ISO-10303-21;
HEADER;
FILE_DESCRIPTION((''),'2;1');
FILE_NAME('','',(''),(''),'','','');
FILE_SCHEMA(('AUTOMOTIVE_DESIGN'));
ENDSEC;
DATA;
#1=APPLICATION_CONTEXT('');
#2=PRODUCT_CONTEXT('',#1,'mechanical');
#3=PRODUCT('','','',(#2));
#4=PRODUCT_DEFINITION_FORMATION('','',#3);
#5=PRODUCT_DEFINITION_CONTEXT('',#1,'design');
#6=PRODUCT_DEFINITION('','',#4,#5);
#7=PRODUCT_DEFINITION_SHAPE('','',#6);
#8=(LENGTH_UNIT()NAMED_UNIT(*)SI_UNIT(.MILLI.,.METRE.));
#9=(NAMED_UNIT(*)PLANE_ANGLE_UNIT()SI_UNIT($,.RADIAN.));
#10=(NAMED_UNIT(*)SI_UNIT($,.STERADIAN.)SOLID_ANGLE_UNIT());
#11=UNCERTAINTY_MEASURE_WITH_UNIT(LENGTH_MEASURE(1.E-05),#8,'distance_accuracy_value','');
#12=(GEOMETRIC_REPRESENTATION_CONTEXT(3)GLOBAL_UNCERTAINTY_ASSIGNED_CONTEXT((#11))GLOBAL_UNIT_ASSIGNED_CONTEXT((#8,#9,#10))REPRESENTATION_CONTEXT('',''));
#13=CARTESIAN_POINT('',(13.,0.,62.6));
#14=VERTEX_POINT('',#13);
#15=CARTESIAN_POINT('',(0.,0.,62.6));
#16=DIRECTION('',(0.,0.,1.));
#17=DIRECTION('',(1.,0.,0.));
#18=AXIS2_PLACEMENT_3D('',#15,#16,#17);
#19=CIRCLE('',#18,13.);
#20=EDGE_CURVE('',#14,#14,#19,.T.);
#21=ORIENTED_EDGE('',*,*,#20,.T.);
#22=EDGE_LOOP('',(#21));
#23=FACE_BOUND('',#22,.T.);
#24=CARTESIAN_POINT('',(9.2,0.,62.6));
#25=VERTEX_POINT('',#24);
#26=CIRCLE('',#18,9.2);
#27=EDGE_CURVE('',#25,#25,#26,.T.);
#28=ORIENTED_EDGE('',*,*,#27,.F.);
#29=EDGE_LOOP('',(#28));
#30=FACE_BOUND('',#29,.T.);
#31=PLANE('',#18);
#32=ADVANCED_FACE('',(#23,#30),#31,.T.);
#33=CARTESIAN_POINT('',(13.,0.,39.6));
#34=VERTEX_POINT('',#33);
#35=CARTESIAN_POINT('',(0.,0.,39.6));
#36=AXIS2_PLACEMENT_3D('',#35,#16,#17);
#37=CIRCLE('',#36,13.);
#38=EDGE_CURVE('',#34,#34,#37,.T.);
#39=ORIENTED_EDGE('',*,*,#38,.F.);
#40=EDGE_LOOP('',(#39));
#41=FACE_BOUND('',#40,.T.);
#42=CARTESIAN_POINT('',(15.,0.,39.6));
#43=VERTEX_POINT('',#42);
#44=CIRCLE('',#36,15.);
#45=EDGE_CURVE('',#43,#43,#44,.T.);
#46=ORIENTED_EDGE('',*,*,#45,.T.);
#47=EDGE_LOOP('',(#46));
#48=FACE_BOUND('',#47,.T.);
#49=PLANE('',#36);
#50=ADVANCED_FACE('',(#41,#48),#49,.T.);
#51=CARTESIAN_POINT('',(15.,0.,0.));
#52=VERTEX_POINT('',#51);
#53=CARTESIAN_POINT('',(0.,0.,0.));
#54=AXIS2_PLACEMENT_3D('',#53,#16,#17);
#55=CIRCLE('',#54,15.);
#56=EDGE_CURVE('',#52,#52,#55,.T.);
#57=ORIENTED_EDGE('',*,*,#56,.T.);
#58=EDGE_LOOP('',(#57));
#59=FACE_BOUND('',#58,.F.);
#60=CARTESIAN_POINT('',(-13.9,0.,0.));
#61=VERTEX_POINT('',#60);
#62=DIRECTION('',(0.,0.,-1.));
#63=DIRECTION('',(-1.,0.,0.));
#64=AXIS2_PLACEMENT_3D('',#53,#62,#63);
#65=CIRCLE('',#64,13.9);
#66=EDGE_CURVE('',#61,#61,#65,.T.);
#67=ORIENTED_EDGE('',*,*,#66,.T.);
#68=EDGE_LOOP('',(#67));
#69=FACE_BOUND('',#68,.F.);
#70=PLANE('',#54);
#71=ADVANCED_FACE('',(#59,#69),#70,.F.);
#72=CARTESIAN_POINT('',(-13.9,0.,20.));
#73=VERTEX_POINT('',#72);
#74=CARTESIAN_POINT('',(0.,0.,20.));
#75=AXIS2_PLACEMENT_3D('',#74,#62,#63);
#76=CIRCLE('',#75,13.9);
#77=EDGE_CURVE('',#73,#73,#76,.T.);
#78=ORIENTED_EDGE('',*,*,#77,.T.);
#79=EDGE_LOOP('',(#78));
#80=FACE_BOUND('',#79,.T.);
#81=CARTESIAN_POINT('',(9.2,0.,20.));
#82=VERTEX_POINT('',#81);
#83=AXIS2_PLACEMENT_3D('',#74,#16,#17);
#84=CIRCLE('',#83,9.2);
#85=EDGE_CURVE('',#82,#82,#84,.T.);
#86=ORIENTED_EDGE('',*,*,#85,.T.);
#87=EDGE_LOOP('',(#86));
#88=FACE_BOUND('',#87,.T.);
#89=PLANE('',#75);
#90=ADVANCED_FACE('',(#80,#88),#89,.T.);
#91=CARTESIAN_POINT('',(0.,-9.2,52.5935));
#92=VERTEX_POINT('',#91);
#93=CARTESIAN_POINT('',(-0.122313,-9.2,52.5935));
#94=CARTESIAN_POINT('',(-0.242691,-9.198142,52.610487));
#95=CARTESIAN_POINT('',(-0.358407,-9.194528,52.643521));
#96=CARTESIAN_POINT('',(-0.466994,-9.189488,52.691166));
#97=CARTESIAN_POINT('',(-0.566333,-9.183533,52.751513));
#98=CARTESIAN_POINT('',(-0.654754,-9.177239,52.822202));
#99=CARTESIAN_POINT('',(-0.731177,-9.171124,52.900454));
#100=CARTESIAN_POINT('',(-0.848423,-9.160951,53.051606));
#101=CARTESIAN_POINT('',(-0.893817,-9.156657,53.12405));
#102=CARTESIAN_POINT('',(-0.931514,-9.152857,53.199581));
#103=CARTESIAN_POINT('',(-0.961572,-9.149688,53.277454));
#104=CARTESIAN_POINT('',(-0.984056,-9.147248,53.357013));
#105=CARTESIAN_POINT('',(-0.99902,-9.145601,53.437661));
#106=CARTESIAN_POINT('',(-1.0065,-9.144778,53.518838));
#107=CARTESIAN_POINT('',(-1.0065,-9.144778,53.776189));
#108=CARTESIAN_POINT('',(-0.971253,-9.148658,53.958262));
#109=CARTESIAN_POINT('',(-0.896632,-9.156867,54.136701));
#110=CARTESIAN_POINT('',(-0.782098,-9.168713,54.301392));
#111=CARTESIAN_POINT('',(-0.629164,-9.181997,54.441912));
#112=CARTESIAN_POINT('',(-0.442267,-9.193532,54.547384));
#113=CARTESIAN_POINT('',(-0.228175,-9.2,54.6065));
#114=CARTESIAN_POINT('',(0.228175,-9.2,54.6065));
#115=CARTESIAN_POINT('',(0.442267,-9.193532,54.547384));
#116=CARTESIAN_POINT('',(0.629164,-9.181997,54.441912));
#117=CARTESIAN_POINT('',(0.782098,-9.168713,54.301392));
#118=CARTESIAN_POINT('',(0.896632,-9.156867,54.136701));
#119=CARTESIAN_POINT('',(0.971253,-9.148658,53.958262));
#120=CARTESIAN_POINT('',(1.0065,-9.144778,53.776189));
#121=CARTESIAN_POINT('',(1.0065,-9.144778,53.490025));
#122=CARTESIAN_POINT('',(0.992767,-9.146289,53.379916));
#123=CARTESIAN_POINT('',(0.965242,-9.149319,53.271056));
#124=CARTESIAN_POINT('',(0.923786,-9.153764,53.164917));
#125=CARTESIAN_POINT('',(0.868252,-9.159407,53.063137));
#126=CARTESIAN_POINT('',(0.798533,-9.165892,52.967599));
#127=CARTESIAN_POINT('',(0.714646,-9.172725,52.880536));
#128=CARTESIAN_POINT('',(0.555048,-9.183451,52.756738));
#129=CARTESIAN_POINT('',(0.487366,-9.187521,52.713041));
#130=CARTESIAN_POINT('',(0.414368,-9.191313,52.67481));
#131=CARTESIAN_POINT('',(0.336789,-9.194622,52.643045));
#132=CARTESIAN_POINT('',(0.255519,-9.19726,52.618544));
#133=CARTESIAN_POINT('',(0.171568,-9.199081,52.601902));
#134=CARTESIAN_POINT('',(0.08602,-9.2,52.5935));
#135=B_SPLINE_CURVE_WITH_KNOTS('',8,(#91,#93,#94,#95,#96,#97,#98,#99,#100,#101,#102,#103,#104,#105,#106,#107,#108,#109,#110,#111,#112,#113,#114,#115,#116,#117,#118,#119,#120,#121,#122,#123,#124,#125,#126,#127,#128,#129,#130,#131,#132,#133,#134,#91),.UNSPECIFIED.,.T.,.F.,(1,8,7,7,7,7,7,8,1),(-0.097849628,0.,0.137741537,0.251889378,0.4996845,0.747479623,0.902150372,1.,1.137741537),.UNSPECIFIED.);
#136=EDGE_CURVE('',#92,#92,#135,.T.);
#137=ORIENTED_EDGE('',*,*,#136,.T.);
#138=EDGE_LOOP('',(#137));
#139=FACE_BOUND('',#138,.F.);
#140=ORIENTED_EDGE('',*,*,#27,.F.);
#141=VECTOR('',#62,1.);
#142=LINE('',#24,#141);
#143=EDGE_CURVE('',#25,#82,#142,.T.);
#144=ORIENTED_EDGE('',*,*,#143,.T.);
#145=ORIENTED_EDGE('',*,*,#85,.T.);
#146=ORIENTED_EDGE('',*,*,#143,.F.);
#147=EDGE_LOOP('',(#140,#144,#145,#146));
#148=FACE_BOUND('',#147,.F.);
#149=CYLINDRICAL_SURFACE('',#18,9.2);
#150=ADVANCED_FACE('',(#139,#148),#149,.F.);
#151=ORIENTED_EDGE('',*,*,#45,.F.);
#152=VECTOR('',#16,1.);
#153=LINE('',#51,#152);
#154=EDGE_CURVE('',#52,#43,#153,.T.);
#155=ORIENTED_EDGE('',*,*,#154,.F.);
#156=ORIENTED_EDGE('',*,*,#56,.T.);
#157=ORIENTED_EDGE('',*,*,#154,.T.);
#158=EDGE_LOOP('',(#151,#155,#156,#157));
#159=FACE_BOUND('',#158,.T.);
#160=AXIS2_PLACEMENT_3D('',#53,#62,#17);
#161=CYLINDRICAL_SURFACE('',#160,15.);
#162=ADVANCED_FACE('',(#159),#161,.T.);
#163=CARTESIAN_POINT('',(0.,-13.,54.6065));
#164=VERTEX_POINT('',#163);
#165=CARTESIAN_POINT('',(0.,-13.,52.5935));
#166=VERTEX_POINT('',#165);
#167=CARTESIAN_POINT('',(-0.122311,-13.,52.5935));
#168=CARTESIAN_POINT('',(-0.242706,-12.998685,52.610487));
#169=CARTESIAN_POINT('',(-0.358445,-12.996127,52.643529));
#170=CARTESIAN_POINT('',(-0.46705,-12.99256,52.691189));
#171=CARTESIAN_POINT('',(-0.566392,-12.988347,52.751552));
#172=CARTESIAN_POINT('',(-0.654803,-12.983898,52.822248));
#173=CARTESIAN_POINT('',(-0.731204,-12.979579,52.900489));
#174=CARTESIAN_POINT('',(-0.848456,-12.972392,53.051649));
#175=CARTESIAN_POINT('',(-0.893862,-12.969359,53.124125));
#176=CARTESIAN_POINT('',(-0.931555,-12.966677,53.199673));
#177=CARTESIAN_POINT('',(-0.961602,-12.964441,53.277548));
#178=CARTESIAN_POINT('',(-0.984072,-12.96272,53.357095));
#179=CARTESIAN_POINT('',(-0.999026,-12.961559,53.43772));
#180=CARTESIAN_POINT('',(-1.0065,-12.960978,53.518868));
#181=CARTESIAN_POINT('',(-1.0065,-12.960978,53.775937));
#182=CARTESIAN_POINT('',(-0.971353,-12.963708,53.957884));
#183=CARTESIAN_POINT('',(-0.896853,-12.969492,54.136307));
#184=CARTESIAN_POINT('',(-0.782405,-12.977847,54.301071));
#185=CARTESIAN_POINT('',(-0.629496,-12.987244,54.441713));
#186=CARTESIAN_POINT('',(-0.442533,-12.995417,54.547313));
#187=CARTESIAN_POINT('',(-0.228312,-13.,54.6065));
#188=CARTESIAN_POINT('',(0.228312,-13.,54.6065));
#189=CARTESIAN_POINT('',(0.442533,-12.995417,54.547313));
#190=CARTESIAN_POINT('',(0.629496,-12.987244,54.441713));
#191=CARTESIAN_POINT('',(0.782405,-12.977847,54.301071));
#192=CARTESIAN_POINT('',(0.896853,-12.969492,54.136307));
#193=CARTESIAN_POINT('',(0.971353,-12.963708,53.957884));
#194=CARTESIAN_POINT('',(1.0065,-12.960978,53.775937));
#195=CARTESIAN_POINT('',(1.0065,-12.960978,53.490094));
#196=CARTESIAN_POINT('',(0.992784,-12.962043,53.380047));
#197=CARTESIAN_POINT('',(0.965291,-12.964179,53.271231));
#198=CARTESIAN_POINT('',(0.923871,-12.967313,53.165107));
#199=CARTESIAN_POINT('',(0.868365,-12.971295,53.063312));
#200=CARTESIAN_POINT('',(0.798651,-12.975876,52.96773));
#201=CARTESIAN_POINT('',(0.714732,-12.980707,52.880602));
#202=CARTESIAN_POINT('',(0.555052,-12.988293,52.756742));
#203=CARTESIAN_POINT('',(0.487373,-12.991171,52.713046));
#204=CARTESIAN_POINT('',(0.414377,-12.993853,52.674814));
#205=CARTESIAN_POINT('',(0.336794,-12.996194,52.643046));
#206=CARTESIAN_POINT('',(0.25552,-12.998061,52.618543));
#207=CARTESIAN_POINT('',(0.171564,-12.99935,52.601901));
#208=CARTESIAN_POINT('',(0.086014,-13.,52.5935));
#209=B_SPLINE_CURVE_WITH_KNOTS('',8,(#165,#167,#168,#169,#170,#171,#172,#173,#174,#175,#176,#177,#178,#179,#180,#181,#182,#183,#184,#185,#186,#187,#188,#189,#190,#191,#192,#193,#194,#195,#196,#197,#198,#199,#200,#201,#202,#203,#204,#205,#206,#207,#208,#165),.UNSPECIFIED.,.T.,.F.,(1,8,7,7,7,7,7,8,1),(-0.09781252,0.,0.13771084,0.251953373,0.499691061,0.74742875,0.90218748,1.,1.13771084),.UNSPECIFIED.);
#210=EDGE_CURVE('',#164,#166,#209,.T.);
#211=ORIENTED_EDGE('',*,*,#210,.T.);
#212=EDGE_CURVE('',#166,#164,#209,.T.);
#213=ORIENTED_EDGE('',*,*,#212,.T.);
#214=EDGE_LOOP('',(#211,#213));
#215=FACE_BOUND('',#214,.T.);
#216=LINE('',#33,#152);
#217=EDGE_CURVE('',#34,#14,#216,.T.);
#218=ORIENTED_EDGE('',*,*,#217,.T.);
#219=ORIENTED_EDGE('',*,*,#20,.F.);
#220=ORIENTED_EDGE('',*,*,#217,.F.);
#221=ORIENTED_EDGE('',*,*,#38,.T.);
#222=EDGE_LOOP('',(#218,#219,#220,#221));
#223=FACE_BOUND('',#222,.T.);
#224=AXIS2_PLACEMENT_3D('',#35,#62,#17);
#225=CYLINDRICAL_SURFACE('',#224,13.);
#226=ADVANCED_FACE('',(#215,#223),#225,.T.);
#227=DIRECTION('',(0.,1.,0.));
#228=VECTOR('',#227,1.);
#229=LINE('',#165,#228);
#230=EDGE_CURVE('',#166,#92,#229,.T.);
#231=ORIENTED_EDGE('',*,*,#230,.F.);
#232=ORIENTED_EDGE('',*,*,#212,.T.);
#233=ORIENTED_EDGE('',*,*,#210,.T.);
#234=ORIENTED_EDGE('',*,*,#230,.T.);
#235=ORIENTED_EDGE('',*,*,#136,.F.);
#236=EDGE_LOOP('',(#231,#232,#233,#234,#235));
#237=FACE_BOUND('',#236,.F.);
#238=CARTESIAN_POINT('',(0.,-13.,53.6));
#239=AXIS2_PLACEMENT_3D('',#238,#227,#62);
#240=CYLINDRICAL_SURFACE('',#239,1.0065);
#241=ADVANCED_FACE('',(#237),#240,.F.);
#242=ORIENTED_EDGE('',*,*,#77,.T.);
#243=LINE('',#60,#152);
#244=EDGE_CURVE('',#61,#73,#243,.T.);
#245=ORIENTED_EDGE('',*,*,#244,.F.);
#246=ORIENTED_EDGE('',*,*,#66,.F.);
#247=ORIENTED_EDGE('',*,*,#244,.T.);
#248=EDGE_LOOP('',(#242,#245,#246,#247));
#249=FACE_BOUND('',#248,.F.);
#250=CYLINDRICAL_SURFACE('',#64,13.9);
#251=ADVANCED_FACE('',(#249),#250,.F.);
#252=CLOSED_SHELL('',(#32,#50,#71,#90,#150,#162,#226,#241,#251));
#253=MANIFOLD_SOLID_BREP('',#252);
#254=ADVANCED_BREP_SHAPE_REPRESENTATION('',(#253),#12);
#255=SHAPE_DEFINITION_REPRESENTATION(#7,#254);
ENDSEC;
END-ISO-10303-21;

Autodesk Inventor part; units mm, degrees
ref_plane "YZ Plane" through (0, 0, 0) normal (1, 0, 0) x (0, 1, 0)
ref_plane "XY Plane" through (0, 0, 0) normal (0, 0, 1) x (1, 0, 0)
sketch "Skizze1" plane through (0, 0, 0) normal (0, 0, 1) x (1, 0, 0)
  circle A0 centre (0, 0) radius 15
  dimension "d0" = 30
extrude "Extrusion1" add sketch "Skizze1" along normal blind 39.6
sketch "Skizze2" plane through (0, 0, 39.6) normal (0, 0, 1) x (1, 0, 0)
  circle A0 centre (0, 0) radius 13
  dimension "d3" = 26
extrude "Extrusion2" add sketch "Skizze2" along normal blind 23
sketch "Skizze5" plane through (0, 0, 62.6) normal (0, 0, 1) x (1, 0, 0)
  circle A0 centre (0, 0) radius 9.2
  dimension "d6" = 18.4
extrude "Extrusion3" cut sketch "Skizze5" against normal through all
sketch "Skizze6" plane through (0, 0, 0) normal (0, 0, -1) x (-1, 0, 0)
  circle A0 centre (0, 0) radius 13.9
  dimension "d9" = 27.8
extrude "Extrusion4" cut sketch "Skizze6" against normal blind 20
ref_plane "Arbeitsebene1" through (0, -13, 39.6) normal (0, 1, 0) x (-1, 0, 0)
sketch "Skizze7" plane through (0, -13, 39.6) normal (0, 1, 0) x (-1, 0, 0)
  line L0 (13, 23) -> (-13, 23) projected
  line L1 (-9.2, 23) -> (9.2, 23) construction
  line L2 (0, 23) -> (0, 14) construction
  point P0 (0, -39.6)
  dimension "d12" = 9
hole "Bohrung1" at (0, -13, 53.6) direction (0, 1, 0) diameter 2.013 end up to surface thread size "M2.5x0.45" class "6H" standard "ISO Metric profile"
properties part number "tubus lense (423606-8031)"
